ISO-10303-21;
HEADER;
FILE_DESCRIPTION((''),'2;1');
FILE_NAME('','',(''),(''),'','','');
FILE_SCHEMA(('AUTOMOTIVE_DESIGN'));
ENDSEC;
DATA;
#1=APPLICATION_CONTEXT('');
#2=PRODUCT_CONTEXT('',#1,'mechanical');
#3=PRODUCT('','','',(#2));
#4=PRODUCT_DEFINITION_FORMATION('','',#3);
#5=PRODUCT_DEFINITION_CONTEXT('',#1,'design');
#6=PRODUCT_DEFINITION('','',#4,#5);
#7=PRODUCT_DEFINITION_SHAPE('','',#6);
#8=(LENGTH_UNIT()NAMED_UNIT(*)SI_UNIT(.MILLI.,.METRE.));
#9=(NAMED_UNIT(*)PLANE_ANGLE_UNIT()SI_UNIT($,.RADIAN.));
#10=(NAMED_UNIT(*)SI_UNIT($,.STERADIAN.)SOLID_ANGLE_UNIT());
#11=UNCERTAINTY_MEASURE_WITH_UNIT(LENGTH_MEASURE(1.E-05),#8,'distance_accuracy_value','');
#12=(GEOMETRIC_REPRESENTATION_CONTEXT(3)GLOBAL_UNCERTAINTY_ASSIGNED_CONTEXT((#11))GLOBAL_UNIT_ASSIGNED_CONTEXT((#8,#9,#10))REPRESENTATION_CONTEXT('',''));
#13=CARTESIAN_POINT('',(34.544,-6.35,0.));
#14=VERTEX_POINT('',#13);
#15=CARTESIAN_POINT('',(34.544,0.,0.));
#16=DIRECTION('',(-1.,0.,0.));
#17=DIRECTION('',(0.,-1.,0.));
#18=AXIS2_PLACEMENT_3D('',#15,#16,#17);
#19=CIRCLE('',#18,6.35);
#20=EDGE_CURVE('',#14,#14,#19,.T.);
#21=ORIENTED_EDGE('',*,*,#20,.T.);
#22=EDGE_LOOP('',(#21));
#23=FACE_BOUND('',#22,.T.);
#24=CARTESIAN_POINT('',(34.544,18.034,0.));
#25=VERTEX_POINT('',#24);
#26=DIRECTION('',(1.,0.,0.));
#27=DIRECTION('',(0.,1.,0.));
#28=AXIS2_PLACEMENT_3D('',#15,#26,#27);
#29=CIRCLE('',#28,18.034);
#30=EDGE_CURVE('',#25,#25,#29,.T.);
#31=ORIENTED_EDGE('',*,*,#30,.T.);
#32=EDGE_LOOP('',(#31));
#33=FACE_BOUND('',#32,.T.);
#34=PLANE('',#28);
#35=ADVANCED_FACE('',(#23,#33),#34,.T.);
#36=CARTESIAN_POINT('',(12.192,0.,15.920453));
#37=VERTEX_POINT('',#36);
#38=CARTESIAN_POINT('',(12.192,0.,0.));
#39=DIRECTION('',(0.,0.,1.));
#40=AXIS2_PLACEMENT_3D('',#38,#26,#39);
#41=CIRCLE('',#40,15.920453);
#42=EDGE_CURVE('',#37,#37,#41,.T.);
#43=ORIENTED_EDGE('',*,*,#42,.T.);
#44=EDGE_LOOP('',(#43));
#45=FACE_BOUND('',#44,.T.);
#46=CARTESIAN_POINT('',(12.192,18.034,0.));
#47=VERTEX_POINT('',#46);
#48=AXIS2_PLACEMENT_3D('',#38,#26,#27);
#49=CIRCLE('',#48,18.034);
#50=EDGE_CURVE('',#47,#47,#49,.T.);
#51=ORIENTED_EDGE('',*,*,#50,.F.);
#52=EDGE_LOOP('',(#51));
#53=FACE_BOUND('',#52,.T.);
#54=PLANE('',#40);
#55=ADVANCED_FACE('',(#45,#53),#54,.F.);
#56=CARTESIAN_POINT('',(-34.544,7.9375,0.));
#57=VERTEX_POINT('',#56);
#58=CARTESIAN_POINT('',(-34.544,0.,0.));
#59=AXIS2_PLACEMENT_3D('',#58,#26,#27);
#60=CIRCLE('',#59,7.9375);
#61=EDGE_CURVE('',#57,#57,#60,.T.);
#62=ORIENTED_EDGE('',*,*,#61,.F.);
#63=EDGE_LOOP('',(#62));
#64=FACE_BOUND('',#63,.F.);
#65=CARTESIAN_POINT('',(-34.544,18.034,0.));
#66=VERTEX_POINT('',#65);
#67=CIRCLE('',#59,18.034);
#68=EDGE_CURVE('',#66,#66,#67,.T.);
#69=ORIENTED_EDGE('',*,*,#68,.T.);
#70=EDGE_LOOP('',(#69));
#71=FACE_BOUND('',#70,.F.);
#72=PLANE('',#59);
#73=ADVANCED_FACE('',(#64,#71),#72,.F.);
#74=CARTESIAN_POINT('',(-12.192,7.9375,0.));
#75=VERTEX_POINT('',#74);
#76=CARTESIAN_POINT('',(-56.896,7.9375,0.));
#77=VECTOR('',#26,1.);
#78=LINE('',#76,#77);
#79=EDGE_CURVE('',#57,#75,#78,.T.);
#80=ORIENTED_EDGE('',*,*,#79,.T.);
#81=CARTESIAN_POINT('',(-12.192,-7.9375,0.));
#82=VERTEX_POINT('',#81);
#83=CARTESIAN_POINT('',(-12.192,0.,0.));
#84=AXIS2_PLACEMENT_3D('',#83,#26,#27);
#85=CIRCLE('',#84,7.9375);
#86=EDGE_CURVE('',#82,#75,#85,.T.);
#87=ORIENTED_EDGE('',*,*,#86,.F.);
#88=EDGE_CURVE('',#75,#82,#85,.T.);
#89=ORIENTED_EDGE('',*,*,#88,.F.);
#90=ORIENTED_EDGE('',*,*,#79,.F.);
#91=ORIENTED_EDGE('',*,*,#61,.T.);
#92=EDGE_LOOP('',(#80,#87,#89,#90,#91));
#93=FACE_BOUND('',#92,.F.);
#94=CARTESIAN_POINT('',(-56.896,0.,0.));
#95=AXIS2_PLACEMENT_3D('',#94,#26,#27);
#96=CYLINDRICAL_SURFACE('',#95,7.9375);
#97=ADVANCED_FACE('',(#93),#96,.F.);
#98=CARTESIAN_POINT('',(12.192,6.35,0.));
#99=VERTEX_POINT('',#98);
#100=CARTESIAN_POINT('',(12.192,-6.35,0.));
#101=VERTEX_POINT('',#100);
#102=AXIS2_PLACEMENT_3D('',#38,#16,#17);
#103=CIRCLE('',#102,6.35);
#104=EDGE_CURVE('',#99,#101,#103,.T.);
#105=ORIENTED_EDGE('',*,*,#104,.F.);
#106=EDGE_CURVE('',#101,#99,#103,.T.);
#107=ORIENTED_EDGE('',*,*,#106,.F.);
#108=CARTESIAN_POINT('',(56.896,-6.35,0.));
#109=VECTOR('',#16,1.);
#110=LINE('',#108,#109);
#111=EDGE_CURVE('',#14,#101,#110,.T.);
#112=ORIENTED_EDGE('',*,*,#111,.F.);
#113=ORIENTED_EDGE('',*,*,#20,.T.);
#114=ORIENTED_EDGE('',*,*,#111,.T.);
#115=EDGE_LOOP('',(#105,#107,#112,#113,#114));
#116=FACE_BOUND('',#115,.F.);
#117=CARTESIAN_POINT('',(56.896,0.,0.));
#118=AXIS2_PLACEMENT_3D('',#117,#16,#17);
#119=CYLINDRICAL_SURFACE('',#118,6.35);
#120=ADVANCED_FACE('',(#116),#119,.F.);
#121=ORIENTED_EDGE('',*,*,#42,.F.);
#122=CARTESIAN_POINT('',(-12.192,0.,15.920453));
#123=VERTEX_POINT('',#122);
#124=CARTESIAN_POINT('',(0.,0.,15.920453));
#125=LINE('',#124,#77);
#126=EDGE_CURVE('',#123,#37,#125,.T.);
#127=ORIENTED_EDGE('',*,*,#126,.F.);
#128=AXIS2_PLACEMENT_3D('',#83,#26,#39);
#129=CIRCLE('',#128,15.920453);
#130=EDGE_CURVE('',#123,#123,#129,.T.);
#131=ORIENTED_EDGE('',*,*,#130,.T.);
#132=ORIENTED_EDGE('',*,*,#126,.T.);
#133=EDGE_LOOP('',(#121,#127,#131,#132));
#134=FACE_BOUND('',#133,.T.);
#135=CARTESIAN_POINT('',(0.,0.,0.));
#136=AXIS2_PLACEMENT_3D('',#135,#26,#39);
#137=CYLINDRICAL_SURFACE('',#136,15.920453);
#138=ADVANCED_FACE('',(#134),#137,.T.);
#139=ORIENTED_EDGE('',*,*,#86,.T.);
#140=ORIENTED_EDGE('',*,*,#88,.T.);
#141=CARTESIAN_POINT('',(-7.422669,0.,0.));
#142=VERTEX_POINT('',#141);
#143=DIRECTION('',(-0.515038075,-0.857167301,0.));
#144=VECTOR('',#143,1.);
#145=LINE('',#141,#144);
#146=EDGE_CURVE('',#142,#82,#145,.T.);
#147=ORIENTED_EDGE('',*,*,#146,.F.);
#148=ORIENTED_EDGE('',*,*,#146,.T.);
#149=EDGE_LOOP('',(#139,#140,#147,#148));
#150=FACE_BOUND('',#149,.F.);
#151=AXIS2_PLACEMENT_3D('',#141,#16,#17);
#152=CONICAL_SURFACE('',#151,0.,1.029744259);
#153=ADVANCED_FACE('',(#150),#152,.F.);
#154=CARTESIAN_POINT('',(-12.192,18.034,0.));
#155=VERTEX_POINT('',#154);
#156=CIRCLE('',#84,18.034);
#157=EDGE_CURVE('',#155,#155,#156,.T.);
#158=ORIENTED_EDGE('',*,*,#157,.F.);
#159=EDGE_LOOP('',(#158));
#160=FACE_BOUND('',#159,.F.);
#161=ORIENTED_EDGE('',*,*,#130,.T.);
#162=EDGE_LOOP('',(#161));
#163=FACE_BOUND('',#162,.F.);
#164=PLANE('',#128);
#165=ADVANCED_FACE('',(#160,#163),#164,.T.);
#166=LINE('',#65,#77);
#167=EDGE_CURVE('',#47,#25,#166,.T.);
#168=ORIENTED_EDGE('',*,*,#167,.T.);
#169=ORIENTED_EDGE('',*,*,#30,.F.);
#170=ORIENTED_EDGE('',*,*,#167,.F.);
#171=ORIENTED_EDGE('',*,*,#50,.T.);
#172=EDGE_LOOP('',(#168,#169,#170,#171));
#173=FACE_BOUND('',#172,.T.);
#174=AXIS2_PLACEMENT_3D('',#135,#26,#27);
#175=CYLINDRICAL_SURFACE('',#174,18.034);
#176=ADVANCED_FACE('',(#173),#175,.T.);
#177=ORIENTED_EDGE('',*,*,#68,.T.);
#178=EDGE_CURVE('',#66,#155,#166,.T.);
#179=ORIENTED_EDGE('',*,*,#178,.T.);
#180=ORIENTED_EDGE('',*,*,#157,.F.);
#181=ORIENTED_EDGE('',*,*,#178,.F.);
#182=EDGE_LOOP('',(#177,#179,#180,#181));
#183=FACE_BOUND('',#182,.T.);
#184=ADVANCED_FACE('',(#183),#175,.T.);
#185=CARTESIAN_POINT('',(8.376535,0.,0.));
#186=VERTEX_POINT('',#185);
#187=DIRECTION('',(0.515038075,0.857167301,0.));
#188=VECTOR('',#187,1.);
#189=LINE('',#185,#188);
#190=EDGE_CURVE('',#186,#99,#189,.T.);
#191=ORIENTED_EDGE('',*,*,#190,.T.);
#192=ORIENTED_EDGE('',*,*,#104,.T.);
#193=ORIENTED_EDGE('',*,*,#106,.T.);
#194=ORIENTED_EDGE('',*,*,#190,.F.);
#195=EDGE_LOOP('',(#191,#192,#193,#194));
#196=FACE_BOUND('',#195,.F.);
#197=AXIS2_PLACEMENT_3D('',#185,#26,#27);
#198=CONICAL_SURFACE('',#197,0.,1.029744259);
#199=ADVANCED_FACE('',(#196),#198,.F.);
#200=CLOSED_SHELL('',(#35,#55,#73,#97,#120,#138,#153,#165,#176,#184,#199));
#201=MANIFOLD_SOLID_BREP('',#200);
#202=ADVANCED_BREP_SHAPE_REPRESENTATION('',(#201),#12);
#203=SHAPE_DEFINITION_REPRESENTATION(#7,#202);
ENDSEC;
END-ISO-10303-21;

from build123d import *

# Parameters (mm, degrees)
F0_R     = 18.034
F1_DEPTH = 34.544
F2_W     = 24.384
F2_H     = 2.286
F5_D     = 12.7
F5_DEPTH = 22.352
F5_TIP   = 3.8154649308
F7_D     = 15.875
F7_DEPTH = 22.352
F7_TIP   = 4.7693311635


# Not quite as in the source:
# - a length typed as a fraction of an inch, garbled in the dataset ("3 / 203.2 mm" for 3/8 in), is restored


with BuildPart() as f1:
    # F0 (on Right) → F1 (new body, symmetric)
    with BuildSketch(Plane.YZ):
        Circle(F0_R)
    extrude(amount=F1_DEPTH, both=True)

    # F2 (on Front) → F3 (revolve, cut)
    with BuildSketch(Plane.XZ):
        with Locations((0, 17.0634527736)):
            Rectangle(F2_W, F2_H)
    revolve(axis=Axis((6.0458816588, 0, 0), (1, 0, 0)), mode=Mode.SUBTRACT)

    # F5
    with Locations(Plane.YZ.offset(34.544)):
        with Locations((0, 0)):
            Hole(F5_D / 2, depth=F5_DEPTH)
            with Locations((0, 0, -(F5_DEPTH + F5_TIP / 2))):  # 118° drill point
                Cone(0, F5_D / 2, F5_TIP, mode=Mode.SUBTRACT)

    # F7
    with Locations(Plane(origin=(-34.544, 0, 0), x_dir=(0, -1, 0), z_dir=(-1, 0, 0))):
        with Locations((0, 0)):
            Hole(F7_D / 2, depth=F7_DEPTH)
            with Locations((0, 0, -(F7_DEPTH + F7_TIP / 2))):  # 118° drill point
                Cone(0, F7_D / 2, F7_TIP, mode=Mode.SUBTRACT)


solid = f1.part
